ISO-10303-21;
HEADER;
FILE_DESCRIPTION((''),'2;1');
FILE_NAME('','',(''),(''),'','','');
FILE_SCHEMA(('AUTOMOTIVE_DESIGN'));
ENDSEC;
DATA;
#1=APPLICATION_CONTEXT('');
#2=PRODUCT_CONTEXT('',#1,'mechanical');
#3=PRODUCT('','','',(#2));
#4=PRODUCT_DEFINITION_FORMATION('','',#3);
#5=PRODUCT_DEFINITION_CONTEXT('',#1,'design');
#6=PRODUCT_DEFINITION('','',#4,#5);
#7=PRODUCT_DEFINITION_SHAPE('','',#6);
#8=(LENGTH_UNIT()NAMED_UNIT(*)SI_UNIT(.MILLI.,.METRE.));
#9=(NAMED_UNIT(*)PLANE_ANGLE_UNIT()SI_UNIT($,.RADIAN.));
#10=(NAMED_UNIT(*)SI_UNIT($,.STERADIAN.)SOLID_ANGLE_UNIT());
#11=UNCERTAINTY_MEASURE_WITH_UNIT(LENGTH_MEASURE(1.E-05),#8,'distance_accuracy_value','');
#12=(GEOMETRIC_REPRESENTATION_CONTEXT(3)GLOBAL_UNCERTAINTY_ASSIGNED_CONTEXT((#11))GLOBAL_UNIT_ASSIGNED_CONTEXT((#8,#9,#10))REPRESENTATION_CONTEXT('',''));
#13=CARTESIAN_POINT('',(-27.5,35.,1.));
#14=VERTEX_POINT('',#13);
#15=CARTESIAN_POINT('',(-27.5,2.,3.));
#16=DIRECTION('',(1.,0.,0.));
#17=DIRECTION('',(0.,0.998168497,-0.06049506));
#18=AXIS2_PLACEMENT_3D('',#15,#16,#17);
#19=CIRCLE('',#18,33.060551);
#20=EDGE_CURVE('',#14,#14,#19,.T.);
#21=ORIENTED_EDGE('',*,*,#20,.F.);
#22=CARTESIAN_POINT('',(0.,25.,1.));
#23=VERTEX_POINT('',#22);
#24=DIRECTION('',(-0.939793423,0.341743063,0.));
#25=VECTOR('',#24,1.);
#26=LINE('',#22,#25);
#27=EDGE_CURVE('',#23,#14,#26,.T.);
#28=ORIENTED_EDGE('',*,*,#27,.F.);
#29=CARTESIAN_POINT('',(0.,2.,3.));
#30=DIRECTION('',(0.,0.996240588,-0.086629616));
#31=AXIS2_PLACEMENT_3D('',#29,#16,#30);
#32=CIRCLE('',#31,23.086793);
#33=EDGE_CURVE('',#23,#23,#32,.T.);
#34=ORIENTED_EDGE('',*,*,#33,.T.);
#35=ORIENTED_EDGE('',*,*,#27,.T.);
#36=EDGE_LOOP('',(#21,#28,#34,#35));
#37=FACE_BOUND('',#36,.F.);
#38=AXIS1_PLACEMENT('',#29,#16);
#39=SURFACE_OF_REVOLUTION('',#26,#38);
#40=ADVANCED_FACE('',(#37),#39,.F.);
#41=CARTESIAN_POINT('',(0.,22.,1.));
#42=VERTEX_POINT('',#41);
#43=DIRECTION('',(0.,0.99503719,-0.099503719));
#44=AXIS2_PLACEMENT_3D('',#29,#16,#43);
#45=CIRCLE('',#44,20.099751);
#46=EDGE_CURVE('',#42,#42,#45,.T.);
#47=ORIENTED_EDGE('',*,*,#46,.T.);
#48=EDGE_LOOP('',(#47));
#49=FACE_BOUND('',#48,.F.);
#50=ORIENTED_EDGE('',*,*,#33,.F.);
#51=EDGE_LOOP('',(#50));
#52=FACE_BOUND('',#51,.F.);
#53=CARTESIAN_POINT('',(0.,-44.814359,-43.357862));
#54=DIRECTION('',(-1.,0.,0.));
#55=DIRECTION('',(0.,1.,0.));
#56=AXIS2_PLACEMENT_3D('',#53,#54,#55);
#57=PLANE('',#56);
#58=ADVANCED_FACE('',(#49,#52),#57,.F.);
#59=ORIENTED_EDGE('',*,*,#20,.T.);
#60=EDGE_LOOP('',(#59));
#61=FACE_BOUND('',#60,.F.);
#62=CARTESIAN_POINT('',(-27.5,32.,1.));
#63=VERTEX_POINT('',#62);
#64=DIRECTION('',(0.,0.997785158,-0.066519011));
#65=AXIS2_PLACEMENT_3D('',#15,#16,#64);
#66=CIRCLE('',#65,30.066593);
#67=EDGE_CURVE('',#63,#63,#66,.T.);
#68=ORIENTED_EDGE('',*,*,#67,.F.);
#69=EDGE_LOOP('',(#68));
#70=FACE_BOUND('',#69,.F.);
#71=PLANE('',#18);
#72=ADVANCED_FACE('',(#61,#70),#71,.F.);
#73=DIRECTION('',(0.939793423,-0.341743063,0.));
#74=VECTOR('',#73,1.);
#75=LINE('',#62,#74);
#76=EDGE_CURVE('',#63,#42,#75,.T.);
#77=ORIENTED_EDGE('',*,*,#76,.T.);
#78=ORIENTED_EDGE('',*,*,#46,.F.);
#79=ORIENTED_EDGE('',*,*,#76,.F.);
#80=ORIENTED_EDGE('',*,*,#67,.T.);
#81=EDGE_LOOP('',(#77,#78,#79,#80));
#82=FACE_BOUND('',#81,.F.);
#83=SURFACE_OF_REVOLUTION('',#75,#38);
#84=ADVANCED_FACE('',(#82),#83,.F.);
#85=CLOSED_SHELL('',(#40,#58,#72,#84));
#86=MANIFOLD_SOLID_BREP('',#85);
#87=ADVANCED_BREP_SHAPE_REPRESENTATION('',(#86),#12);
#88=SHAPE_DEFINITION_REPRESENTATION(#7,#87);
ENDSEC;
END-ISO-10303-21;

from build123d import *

# Parameters (mm, degrees)
F1_DEPTH  = 7.5
F2_W      = 2.6
F2_H      = 4.75
F0_R      = 18.75
F4_DEPTH  = 2.375
F8_R      = 4
F9_W      = 7.5
F9_H      = 50
F10_DEPTH = 86


# Not quite as in the source:
# - a feature names something its author has since deleted; it is built from what else it names


with BuildPart() as f1:
    # F0 (on Right) → F1 (new body)
    with BuildSketch(Plane.YZ):
        with BuildLine():
            Line((-27.5, -30.8578620553), (-27.5, 35))
            Line((-27.5, 35), (-35, 35))
            Line((-35, 35), (-35, -33.3578620553))
            ThreePointArc((-35, -33.3578620553), (-32.0710678119, -40.4289298672), (-25, -43.3578620553))
            Line((-25, -43.3578620553), (25, -43.3578620553))
            ThreePointArc((25, -43.3578620553), (32.0710678119, -40.4289298672), (35, -33.3578620553))
            Line((35, -33.3578620553), (35, 35))
            Line((35, 35), (27.5, 35))
            Line((27.5, 35), (27.5, -30.8578620553))
            ThreePointArc((27.5, -30.8578620553), (26.0355339059, -34.3933959612), (22.5, -35.8578620553))
            Line((22.5, -35.8578620553), (-22.5, -35.8578620553))
            ThreePointArc((-22.5, -35.8578620553), (-26.0355339059, -34.3933959612), (-27.5, -30.8578620553))
        make_face()
    extrude(amount=F1_DEPTH)

    # F3: sweep along a path in F0
    with BuildLine(Plane.YZ) as f3_path:
        Line((27.5, 35), (27.5, -30.8578620553))
        ThreePointArc((27.5, -30.8578620553), (26.0355339059, -34.3933959612), (22.5, -35.8578620553))
        Line((22.5, -35.8578620553), (-22.5, -35.8578620553))
        ThreePointArc((-22.5, -35.8578620553), (-26.0355339059, -34.3933959612), (-27.5, -30.8578620553))
        Line((-27.5, -30.8578620553), (-27.5, 35))
    # F2 (on face) → F3 (sweep, cut)
    with BuildSketch(Plane.XY.offset(35)):
        with Locations((3.675, 29.875)):
            Rectangle(F2_W, F2_H)
    sweep(path=f3_path.line, mode=Mode.SUBTRACT)

    # F0 (on Right) → F4 (join)
    with BuildSketch(Plane.YZ):
        with BuildLine():
            Line((27.5, 35), (-27.5, 35))
            Line((-27.5, 35), (-27.5, -30.8578620553))
            ThreePointArc((-27.5, -30.8578620553), (-26.0355339059, -34.3933959612), (-22.5, -35.8578620553))
            Line((-22.5, -35.8578620553), (22.5, -35.8578620553))
            ThreePointArc((22.5, -35.8578620553), (26.0355339059, -34.3933959612), (27.5, -30.8578620553))
            Line((27.5, -30.8578620553), (27.5, 35))
        make_face()
        with Locations((2, 3)):
            Circle(F0_R, mode=Mode.SUBTRACT)
    extrude(amount=F4_DEPTH)

    # F6 (on offset) → F7 (revolve)
    with BuildSketch(Plane.XY.offset(1)):
        Polygon((0, 22), (0, 25), (-27.5, 35), (-27.5, 32), align=None)
    revolve(axis=Axis((0, 2, 3), (1, 0, 0)))

    # F8
    f8_edges = [f1.edges().sort_by_distance(p)[0] for p in [
        (6.2375, -27.5, 35),
        (6.2375, 27.5, 35),
    ]]
    fillet(f8_edges, radius=F8_R)

    # F9 (on face) → F10 (cut)
    with BuildSketch(Plane(origin=(0, 0, -43.3578620553), x_dir=(1, 0, 0), z_dir=(0, 0, -1))):
        Polygon((0, -25), (0, -46.4285723865), (9.4410963356, -46.4285723865), (9.4410963356, 44.8143593967), (0, 44.8143593967), (0, 25), (7.5, 25), (7.5, -25), align=None)
        with Locations((3.75, 0)):
            Rectangle(F9_W, F9_H)
    extrude(amount=-F10_DEPTH, mode=Mode.SUBTRACT)


solid = f1.part
